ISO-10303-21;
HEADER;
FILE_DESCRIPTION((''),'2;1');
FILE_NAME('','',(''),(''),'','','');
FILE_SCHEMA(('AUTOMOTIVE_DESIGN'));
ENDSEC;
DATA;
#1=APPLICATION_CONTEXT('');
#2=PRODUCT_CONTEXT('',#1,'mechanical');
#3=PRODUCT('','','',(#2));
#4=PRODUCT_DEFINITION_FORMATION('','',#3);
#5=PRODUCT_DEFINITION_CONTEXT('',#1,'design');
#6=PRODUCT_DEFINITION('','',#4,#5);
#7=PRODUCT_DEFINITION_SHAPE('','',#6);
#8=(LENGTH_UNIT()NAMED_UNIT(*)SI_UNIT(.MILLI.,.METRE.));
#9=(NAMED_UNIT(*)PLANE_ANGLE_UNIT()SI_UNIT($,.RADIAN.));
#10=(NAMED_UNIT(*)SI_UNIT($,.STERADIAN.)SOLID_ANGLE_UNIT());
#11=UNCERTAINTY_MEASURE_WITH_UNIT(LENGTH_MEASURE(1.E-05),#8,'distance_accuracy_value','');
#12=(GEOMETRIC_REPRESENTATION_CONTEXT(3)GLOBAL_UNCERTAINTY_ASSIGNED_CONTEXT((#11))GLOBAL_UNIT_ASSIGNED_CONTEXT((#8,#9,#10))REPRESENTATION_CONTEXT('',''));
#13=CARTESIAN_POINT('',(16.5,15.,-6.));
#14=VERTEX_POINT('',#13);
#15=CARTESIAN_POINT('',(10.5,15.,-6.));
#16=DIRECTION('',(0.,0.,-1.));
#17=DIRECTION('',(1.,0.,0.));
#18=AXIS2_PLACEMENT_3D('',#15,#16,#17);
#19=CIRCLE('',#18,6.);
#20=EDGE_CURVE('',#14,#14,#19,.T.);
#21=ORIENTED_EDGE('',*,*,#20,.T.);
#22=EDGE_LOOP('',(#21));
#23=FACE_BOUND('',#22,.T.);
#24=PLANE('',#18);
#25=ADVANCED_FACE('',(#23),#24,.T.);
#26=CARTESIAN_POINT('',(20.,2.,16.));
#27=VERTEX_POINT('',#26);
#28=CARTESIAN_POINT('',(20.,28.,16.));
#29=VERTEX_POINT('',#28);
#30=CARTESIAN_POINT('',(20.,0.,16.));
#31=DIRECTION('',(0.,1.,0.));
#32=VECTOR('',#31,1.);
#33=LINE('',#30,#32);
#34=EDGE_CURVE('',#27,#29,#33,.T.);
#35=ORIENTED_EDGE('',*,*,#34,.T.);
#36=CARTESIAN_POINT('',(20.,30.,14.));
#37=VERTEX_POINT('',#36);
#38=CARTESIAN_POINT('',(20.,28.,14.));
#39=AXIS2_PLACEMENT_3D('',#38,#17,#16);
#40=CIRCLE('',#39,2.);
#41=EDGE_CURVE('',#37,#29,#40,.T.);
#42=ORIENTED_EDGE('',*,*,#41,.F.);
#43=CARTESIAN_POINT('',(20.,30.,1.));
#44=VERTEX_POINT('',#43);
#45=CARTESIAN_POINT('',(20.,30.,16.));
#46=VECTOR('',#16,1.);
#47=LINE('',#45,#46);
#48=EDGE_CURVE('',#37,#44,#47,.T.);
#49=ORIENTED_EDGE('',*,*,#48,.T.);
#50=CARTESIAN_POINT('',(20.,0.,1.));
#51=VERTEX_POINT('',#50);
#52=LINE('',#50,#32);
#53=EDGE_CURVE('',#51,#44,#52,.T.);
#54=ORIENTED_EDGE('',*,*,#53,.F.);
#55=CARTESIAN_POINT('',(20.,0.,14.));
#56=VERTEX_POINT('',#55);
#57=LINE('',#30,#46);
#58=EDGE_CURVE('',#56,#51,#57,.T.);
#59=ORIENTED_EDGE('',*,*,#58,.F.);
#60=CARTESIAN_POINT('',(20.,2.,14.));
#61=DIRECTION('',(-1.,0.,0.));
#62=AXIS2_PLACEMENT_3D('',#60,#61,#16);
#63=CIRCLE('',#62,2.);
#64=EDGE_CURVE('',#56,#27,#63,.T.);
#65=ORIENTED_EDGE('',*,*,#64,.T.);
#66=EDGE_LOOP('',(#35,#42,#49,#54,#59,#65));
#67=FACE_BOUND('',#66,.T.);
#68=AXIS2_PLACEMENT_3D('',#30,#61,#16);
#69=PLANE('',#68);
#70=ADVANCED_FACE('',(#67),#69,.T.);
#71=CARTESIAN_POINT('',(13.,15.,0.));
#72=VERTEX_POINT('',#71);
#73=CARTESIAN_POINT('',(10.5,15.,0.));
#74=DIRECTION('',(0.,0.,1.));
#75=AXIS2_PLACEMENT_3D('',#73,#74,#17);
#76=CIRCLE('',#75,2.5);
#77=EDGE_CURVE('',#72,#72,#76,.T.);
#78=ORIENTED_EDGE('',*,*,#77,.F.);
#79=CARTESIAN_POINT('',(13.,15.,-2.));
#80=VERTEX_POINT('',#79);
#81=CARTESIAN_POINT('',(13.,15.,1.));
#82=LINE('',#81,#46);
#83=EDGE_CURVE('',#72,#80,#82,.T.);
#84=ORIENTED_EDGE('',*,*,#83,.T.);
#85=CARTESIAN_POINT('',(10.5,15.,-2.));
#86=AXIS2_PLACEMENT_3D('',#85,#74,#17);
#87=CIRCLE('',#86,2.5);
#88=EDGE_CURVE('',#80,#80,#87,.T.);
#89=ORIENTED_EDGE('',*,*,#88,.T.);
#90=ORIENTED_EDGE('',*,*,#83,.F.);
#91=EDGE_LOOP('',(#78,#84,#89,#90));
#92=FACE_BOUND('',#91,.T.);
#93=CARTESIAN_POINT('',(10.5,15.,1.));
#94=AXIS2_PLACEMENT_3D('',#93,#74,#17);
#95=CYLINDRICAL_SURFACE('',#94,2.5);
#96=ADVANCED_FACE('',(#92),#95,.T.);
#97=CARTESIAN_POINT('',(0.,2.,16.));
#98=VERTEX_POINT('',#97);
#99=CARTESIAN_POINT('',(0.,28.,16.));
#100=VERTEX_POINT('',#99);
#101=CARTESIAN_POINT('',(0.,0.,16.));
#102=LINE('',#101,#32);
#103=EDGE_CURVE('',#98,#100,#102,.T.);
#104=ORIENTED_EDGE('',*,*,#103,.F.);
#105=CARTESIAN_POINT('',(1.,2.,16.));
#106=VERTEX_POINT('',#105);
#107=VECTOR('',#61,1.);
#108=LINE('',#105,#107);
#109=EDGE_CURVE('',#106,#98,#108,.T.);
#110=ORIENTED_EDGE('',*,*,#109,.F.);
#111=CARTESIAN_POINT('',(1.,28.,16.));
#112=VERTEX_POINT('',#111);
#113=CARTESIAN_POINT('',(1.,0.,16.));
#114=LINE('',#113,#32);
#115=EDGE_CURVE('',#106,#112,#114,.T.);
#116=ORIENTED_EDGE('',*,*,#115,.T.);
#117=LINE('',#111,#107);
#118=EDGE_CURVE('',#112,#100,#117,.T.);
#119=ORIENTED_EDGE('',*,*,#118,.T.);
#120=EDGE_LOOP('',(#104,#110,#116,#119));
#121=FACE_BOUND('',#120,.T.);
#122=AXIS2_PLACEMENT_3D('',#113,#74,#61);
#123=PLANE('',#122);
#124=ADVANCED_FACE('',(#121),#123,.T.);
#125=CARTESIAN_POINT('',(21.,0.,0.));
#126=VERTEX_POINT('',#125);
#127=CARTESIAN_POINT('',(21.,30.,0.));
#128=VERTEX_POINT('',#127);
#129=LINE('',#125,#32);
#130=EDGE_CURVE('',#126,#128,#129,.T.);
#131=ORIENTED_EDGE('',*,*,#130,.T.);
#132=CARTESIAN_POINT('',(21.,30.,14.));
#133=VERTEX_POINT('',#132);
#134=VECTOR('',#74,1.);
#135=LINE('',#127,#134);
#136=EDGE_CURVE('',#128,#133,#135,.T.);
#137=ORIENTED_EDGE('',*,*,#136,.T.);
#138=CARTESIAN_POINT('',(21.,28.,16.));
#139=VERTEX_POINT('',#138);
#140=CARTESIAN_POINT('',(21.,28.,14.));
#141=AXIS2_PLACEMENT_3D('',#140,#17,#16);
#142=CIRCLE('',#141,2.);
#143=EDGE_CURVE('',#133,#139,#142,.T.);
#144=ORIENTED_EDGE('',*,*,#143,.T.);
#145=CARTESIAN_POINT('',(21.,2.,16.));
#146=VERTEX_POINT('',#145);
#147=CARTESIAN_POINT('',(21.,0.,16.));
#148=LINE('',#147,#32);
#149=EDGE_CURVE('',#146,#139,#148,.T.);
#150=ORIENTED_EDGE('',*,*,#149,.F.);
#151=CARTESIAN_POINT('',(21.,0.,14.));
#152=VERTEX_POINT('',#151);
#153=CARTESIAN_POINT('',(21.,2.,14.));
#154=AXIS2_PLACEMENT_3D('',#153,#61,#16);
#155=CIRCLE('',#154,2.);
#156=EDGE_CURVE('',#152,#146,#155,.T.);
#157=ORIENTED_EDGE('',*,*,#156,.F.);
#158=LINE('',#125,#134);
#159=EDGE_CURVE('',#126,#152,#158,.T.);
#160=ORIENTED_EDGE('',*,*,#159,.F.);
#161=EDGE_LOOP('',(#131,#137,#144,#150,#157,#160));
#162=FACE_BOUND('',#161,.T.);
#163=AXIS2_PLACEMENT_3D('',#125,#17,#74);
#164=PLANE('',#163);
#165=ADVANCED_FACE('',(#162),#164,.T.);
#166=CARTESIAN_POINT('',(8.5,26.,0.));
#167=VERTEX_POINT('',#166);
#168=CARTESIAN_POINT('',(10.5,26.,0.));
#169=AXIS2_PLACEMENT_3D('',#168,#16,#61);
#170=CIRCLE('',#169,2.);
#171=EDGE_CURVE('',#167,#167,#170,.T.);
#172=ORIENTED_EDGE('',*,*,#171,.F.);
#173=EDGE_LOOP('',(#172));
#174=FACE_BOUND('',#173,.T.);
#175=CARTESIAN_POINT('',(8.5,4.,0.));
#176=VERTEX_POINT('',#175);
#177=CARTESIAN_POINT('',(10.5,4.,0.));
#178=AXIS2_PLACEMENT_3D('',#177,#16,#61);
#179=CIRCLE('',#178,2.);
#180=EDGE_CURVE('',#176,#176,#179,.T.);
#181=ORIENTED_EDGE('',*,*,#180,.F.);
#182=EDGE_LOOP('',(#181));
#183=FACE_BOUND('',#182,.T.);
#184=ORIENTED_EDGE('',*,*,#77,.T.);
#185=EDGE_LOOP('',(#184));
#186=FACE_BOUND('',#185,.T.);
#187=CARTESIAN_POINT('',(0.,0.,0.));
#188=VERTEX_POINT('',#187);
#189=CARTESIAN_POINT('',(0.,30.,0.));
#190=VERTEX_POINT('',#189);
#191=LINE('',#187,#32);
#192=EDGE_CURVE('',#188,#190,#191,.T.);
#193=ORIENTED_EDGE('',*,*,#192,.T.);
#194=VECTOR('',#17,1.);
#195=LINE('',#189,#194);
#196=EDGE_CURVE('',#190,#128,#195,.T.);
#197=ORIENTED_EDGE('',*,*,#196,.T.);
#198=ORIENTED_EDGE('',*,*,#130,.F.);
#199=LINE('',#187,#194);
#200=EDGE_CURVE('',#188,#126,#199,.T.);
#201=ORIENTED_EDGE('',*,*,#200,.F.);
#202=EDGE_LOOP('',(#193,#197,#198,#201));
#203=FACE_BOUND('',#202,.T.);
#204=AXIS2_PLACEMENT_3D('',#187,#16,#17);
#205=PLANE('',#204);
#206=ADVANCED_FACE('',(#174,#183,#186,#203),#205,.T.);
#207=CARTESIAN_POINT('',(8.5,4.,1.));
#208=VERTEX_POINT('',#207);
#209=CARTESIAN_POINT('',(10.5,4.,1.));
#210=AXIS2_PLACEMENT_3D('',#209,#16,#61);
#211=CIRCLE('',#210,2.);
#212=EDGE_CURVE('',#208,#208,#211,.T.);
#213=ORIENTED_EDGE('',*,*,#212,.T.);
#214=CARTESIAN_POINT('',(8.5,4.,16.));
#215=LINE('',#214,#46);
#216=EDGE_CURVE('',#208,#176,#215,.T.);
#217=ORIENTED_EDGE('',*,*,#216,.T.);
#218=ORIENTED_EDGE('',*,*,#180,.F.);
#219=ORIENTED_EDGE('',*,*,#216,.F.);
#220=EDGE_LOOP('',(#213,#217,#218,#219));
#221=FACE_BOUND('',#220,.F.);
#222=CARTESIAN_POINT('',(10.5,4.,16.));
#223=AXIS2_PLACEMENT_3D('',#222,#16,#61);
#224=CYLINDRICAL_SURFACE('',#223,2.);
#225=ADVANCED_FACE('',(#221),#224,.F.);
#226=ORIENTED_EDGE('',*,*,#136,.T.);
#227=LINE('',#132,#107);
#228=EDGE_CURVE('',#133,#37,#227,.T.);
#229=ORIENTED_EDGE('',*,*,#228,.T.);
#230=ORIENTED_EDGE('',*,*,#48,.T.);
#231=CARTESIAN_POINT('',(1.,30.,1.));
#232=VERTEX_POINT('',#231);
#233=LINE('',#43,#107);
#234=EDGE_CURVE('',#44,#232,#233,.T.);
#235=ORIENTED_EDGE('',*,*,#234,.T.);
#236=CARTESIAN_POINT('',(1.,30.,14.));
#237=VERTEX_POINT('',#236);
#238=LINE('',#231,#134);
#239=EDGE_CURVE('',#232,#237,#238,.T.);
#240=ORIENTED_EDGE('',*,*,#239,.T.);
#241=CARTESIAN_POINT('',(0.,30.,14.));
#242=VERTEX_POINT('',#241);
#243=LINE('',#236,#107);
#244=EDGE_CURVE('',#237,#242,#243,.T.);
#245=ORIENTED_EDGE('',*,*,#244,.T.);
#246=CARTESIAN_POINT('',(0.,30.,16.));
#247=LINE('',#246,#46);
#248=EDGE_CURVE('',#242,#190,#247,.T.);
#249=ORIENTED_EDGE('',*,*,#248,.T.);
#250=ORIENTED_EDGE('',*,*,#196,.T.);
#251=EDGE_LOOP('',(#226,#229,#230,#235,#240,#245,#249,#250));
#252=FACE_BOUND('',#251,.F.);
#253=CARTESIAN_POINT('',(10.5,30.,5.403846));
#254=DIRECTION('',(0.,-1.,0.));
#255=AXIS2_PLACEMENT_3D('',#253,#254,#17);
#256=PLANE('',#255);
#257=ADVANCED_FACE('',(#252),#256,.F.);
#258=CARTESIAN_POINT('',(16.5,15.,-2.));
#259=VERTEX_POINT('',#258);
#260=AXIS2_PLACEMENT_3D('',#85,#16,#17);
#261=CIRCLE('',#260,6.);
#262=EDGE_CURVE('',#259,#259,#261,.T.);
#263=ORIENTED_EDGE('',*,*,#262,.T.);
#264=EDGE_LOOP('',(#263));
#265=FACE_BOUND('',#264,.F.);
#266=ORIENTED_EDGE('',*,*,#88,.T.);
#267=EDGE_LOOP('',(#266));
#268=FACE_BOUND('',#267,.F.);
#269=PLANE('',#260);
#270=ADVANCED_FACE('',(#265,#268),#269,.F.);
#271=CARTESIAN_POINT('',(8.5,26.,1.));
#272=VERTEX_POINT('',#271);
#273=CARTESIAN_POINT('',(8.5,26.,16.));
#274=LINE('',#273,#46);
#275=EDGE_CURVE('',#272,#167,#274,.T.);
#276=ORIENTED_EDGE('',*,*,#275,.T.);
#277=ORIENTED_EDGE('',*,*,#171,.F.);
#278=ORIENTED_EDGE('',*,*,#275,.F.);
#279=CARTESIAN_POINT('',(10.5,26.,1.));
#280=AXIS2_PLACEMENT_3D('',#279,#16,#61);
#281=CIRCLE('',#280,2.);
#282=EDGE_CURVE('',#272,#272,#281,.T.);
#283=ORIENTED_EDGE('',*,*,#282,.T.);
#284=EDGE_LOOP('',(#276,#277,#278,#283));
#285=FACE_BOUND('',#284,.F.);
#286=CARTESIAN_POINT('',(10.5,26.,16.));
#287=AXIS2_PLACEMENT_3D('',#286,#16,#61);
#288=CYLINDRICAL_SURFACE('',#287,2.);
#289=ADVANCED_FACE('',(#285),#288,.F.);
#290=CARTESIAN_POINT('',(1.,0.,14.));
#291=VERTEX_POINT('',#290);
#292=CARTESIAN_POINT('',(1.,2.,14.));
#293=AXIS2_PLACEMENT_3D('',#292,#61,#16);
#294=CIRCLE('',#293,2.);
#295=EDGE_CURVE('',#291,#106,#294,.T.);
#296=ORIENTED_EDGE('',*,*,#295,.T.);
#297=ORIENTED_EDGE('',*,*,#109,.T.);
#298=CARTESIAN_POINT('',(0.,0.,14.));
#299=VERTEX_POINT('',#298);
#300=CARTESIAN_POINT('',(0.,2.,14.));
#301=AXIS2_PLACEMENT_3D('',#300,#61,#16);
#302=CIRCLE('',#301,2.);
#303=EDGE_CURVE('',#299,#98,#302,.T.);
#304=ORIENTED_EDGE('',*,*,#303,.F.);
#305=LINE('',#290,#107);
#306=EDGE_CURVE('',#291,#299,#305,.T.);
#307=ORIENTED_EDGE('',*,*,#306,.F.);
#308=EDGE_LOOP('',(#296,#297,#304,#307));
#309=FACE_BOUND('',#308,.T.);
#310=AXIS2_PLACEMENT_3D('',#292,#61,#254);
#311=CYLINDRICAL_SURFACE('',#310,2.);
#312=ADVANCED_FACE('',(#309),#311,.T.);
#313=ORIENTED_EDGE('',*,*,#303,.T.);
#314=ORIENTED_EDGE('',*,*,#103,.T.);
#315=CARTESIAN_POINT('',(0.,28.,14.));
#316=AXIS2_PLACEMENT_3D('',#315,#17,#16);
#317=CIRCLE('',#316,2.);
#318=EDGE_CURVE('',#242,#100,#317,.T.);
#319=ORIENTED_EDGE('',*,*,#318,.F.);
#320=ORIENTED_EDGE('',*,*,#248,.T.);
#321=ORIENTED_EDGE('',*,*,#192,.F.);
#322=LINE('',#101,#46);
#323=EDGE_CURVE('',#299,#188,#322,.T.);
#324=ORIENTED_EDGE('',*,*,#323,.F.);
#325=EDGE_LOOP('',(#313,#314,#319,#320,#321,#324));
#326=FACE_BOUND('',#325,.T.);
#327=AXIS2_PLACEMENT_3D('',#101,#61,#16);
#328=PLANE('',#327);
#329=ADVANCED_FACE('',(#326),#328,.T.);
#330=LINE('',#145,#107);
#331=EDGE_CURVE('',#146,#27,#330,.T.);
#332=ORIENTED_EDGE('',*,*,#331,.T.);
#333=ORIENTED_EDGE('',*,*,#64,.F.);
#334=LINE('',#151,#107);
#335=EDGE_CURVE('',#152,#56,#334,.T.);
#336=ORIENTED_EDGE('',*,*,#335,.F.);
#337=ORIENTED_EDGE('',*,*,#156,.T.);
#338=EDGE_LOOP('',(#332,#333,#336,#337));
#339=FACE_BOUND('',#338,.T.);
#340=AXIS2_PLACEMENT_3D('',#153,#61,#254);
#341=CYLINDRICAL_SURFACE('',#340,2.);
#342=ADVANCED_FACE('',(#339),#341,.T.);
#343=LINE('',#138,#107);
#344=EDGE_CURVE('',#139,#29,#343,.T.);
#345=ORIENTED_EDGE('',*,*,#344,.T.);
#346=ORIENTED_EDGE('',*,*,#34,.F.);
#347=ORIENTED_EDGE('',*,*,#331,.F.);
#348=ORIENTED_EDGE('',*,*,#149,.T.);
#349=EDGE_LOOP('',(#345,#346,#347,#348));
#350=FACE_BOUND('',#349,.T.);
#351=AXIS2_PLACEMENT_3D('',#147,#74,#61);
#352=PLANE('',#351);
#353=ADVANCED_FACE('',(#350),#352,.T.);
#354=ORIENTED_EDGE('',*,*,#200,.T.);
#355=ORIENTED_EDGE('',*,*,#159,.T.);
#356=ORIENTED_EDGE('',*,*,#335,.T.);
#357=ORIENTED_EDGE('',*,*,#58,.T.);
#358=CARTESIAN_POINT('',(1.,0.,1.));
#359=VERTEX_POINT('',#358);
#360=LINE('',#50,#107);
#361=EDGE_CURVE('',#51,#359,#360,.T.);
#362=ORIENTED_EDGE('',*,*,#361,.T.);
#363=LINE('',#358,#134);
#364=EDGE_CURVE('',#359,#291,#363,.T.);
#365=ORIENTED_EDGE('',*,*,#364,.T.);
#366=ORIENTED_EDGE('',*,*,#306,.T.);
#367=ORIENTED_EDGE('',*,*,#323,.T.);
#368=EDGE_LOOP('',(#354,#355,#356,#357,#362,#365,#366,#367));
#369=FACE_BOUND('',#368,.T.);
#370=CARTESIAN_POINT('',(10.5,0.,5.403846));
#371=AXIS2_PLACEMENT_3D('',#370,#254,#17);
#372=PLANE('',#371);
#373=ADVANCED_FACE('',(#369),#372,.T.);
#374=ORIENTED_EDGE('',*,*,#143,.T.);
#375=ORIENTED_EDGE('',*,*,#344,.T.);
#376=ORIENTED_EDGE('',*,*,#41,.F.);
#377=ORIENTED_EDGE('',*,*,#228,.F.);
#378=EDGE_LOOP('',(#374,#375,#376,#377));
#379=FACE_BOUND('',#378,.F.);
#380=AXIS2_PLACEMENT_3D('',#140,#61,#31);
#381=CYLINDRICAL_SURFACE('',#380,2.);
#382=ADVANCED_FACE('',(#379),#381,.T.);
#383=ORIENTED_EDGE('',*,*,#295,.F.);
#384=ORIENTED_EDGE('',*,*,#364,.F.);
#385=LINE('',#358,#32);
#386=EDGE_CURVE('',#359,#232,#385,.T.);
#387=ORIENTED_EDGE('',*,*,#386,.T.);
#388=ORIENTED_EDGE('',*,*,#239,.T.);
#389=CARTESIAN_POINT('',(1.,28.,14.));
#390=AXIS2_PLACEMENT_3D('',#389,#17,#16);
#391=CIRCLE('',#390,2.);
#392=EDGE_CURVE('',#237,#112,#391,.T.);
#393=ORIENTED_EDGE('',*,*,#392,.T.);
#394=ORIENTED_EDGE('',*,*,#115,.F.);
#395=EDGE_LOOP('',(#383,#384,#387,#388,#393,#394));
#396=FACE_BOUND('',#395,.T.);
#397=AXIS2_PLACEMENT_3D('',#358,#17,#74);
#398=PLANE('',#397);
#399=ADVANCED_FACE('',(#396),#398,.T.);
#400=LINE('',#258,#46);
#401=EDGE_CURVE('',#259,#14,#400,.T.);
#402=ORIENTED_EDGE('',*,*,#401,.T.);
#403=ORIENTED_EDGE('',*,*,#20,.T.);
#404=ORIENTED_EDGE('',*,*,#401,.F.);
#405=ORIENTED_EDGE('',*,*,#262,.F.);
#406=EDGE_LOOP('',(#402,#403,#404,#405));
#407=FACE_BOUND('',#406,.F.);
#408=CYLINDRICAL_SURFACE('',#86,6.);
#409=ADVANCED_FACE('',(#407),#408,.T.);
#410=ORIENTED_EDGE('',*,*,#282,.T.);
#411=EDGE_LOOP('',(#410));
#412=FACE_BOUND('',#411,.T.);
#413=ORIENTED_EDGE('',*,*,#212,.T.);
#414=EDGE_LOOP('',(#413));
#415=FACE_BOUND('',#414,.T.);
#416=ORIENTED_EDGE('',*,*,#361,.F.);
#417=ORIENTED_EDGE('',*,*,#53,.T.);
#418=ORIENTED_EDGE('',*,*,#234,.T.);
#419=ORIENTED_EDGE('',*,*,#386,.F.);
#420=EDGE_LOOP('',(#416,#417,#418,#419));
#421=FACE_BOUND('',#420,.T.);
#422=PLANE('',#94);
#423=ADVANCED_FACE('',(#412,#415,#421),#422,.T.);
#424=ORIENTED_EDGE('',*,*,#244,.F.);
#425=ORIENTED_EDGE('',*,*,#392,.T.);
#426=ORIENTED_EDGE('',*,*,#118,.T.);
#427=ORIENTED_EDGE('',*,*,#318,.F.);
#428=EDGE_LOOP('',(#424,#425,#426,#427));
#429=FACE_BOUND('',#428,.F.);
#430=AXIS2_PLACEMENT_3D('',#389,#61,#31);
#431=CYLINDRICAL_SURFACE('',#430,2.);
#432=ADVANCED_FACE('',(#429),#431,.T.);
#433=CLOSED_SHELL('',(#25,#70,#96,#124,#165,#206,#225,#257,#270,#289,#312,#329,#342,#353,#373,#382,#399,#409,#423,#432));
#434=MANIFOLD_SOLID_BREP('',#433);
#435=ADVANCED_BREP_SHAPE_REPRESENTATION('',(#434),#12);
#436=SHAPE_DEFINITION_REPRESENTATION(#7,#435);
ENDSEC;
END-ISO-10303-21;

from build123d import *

# Parameters (mm, degrees)
F1_DEPTH = 30
F2_R     = 2.5
F3_DEPTH = 3
F4_R     = 6
F4_R_2   = 2.5
F5_DEPTH = 4
F6_R     = 2
F7_D     = 4
F7_DEPTH = 15
F7_TIP   = 1.2017212381


with BuildPart() as f1:
    # F0 (on Front) → F1 (new body)
    with BuildSketch(Plane.XZ):
        Polygon((0, 1), (0, 0), (21, 0), (21, 1), (21, 16), (20, 16), (20, 1), (1, 1), (1, 16), (0, 16), align=None)
    extrude(amount=-F1_DEPTH)

    # F2 (on face) → F3 (join)
    with BuildSketch(Plane.XY.offset(1)):
        with Locations((10.5, 15)):
            Circle(F2_R)
    extrude(amount=-F3_DEPTH)

    # F4 (on face) → F5 (join)
    with BuildSketch(Plane(origin=(0, 0, -2), x_dir=(1, 0, 0), z_dir=(0, 0, -1))):
        with Locations((10.5, -15)):
            Circle(F4_R)
        with Locations((10.5, -15)):
            Circle(F4_R_2, mode=Mode.SUBTRACT)
        with Locations((10.5, -15)):
            Circle(F4_R_2)
    extrude(amount=F5_DEPTH)

    # F6
    f6_edges = [f1.edges().sort_by_distance(p)[0] for p in [
        (20.5, 0, 16),
        (20.5, 30, 16),
        (0.5, 30, 16),
        (0.5, 0, 16),
    ]]
    fillet(f6_edges, radius=F6_R)

    # F7
    with Locations(Plane.XY.offset(1)):
        with Locations((10.5, 4), (10.5, 26)):
            Hole(F7_D / 2, depth=F7_DEPTH)
            with Locations((0, 0, -(F7_DEPTH + F7_TIP / 2))):  # 118° drill point
                Cone(0, F7_D / 2, F7_TIP, mode=Mode.SUBTRACT)


solid = f1.part
